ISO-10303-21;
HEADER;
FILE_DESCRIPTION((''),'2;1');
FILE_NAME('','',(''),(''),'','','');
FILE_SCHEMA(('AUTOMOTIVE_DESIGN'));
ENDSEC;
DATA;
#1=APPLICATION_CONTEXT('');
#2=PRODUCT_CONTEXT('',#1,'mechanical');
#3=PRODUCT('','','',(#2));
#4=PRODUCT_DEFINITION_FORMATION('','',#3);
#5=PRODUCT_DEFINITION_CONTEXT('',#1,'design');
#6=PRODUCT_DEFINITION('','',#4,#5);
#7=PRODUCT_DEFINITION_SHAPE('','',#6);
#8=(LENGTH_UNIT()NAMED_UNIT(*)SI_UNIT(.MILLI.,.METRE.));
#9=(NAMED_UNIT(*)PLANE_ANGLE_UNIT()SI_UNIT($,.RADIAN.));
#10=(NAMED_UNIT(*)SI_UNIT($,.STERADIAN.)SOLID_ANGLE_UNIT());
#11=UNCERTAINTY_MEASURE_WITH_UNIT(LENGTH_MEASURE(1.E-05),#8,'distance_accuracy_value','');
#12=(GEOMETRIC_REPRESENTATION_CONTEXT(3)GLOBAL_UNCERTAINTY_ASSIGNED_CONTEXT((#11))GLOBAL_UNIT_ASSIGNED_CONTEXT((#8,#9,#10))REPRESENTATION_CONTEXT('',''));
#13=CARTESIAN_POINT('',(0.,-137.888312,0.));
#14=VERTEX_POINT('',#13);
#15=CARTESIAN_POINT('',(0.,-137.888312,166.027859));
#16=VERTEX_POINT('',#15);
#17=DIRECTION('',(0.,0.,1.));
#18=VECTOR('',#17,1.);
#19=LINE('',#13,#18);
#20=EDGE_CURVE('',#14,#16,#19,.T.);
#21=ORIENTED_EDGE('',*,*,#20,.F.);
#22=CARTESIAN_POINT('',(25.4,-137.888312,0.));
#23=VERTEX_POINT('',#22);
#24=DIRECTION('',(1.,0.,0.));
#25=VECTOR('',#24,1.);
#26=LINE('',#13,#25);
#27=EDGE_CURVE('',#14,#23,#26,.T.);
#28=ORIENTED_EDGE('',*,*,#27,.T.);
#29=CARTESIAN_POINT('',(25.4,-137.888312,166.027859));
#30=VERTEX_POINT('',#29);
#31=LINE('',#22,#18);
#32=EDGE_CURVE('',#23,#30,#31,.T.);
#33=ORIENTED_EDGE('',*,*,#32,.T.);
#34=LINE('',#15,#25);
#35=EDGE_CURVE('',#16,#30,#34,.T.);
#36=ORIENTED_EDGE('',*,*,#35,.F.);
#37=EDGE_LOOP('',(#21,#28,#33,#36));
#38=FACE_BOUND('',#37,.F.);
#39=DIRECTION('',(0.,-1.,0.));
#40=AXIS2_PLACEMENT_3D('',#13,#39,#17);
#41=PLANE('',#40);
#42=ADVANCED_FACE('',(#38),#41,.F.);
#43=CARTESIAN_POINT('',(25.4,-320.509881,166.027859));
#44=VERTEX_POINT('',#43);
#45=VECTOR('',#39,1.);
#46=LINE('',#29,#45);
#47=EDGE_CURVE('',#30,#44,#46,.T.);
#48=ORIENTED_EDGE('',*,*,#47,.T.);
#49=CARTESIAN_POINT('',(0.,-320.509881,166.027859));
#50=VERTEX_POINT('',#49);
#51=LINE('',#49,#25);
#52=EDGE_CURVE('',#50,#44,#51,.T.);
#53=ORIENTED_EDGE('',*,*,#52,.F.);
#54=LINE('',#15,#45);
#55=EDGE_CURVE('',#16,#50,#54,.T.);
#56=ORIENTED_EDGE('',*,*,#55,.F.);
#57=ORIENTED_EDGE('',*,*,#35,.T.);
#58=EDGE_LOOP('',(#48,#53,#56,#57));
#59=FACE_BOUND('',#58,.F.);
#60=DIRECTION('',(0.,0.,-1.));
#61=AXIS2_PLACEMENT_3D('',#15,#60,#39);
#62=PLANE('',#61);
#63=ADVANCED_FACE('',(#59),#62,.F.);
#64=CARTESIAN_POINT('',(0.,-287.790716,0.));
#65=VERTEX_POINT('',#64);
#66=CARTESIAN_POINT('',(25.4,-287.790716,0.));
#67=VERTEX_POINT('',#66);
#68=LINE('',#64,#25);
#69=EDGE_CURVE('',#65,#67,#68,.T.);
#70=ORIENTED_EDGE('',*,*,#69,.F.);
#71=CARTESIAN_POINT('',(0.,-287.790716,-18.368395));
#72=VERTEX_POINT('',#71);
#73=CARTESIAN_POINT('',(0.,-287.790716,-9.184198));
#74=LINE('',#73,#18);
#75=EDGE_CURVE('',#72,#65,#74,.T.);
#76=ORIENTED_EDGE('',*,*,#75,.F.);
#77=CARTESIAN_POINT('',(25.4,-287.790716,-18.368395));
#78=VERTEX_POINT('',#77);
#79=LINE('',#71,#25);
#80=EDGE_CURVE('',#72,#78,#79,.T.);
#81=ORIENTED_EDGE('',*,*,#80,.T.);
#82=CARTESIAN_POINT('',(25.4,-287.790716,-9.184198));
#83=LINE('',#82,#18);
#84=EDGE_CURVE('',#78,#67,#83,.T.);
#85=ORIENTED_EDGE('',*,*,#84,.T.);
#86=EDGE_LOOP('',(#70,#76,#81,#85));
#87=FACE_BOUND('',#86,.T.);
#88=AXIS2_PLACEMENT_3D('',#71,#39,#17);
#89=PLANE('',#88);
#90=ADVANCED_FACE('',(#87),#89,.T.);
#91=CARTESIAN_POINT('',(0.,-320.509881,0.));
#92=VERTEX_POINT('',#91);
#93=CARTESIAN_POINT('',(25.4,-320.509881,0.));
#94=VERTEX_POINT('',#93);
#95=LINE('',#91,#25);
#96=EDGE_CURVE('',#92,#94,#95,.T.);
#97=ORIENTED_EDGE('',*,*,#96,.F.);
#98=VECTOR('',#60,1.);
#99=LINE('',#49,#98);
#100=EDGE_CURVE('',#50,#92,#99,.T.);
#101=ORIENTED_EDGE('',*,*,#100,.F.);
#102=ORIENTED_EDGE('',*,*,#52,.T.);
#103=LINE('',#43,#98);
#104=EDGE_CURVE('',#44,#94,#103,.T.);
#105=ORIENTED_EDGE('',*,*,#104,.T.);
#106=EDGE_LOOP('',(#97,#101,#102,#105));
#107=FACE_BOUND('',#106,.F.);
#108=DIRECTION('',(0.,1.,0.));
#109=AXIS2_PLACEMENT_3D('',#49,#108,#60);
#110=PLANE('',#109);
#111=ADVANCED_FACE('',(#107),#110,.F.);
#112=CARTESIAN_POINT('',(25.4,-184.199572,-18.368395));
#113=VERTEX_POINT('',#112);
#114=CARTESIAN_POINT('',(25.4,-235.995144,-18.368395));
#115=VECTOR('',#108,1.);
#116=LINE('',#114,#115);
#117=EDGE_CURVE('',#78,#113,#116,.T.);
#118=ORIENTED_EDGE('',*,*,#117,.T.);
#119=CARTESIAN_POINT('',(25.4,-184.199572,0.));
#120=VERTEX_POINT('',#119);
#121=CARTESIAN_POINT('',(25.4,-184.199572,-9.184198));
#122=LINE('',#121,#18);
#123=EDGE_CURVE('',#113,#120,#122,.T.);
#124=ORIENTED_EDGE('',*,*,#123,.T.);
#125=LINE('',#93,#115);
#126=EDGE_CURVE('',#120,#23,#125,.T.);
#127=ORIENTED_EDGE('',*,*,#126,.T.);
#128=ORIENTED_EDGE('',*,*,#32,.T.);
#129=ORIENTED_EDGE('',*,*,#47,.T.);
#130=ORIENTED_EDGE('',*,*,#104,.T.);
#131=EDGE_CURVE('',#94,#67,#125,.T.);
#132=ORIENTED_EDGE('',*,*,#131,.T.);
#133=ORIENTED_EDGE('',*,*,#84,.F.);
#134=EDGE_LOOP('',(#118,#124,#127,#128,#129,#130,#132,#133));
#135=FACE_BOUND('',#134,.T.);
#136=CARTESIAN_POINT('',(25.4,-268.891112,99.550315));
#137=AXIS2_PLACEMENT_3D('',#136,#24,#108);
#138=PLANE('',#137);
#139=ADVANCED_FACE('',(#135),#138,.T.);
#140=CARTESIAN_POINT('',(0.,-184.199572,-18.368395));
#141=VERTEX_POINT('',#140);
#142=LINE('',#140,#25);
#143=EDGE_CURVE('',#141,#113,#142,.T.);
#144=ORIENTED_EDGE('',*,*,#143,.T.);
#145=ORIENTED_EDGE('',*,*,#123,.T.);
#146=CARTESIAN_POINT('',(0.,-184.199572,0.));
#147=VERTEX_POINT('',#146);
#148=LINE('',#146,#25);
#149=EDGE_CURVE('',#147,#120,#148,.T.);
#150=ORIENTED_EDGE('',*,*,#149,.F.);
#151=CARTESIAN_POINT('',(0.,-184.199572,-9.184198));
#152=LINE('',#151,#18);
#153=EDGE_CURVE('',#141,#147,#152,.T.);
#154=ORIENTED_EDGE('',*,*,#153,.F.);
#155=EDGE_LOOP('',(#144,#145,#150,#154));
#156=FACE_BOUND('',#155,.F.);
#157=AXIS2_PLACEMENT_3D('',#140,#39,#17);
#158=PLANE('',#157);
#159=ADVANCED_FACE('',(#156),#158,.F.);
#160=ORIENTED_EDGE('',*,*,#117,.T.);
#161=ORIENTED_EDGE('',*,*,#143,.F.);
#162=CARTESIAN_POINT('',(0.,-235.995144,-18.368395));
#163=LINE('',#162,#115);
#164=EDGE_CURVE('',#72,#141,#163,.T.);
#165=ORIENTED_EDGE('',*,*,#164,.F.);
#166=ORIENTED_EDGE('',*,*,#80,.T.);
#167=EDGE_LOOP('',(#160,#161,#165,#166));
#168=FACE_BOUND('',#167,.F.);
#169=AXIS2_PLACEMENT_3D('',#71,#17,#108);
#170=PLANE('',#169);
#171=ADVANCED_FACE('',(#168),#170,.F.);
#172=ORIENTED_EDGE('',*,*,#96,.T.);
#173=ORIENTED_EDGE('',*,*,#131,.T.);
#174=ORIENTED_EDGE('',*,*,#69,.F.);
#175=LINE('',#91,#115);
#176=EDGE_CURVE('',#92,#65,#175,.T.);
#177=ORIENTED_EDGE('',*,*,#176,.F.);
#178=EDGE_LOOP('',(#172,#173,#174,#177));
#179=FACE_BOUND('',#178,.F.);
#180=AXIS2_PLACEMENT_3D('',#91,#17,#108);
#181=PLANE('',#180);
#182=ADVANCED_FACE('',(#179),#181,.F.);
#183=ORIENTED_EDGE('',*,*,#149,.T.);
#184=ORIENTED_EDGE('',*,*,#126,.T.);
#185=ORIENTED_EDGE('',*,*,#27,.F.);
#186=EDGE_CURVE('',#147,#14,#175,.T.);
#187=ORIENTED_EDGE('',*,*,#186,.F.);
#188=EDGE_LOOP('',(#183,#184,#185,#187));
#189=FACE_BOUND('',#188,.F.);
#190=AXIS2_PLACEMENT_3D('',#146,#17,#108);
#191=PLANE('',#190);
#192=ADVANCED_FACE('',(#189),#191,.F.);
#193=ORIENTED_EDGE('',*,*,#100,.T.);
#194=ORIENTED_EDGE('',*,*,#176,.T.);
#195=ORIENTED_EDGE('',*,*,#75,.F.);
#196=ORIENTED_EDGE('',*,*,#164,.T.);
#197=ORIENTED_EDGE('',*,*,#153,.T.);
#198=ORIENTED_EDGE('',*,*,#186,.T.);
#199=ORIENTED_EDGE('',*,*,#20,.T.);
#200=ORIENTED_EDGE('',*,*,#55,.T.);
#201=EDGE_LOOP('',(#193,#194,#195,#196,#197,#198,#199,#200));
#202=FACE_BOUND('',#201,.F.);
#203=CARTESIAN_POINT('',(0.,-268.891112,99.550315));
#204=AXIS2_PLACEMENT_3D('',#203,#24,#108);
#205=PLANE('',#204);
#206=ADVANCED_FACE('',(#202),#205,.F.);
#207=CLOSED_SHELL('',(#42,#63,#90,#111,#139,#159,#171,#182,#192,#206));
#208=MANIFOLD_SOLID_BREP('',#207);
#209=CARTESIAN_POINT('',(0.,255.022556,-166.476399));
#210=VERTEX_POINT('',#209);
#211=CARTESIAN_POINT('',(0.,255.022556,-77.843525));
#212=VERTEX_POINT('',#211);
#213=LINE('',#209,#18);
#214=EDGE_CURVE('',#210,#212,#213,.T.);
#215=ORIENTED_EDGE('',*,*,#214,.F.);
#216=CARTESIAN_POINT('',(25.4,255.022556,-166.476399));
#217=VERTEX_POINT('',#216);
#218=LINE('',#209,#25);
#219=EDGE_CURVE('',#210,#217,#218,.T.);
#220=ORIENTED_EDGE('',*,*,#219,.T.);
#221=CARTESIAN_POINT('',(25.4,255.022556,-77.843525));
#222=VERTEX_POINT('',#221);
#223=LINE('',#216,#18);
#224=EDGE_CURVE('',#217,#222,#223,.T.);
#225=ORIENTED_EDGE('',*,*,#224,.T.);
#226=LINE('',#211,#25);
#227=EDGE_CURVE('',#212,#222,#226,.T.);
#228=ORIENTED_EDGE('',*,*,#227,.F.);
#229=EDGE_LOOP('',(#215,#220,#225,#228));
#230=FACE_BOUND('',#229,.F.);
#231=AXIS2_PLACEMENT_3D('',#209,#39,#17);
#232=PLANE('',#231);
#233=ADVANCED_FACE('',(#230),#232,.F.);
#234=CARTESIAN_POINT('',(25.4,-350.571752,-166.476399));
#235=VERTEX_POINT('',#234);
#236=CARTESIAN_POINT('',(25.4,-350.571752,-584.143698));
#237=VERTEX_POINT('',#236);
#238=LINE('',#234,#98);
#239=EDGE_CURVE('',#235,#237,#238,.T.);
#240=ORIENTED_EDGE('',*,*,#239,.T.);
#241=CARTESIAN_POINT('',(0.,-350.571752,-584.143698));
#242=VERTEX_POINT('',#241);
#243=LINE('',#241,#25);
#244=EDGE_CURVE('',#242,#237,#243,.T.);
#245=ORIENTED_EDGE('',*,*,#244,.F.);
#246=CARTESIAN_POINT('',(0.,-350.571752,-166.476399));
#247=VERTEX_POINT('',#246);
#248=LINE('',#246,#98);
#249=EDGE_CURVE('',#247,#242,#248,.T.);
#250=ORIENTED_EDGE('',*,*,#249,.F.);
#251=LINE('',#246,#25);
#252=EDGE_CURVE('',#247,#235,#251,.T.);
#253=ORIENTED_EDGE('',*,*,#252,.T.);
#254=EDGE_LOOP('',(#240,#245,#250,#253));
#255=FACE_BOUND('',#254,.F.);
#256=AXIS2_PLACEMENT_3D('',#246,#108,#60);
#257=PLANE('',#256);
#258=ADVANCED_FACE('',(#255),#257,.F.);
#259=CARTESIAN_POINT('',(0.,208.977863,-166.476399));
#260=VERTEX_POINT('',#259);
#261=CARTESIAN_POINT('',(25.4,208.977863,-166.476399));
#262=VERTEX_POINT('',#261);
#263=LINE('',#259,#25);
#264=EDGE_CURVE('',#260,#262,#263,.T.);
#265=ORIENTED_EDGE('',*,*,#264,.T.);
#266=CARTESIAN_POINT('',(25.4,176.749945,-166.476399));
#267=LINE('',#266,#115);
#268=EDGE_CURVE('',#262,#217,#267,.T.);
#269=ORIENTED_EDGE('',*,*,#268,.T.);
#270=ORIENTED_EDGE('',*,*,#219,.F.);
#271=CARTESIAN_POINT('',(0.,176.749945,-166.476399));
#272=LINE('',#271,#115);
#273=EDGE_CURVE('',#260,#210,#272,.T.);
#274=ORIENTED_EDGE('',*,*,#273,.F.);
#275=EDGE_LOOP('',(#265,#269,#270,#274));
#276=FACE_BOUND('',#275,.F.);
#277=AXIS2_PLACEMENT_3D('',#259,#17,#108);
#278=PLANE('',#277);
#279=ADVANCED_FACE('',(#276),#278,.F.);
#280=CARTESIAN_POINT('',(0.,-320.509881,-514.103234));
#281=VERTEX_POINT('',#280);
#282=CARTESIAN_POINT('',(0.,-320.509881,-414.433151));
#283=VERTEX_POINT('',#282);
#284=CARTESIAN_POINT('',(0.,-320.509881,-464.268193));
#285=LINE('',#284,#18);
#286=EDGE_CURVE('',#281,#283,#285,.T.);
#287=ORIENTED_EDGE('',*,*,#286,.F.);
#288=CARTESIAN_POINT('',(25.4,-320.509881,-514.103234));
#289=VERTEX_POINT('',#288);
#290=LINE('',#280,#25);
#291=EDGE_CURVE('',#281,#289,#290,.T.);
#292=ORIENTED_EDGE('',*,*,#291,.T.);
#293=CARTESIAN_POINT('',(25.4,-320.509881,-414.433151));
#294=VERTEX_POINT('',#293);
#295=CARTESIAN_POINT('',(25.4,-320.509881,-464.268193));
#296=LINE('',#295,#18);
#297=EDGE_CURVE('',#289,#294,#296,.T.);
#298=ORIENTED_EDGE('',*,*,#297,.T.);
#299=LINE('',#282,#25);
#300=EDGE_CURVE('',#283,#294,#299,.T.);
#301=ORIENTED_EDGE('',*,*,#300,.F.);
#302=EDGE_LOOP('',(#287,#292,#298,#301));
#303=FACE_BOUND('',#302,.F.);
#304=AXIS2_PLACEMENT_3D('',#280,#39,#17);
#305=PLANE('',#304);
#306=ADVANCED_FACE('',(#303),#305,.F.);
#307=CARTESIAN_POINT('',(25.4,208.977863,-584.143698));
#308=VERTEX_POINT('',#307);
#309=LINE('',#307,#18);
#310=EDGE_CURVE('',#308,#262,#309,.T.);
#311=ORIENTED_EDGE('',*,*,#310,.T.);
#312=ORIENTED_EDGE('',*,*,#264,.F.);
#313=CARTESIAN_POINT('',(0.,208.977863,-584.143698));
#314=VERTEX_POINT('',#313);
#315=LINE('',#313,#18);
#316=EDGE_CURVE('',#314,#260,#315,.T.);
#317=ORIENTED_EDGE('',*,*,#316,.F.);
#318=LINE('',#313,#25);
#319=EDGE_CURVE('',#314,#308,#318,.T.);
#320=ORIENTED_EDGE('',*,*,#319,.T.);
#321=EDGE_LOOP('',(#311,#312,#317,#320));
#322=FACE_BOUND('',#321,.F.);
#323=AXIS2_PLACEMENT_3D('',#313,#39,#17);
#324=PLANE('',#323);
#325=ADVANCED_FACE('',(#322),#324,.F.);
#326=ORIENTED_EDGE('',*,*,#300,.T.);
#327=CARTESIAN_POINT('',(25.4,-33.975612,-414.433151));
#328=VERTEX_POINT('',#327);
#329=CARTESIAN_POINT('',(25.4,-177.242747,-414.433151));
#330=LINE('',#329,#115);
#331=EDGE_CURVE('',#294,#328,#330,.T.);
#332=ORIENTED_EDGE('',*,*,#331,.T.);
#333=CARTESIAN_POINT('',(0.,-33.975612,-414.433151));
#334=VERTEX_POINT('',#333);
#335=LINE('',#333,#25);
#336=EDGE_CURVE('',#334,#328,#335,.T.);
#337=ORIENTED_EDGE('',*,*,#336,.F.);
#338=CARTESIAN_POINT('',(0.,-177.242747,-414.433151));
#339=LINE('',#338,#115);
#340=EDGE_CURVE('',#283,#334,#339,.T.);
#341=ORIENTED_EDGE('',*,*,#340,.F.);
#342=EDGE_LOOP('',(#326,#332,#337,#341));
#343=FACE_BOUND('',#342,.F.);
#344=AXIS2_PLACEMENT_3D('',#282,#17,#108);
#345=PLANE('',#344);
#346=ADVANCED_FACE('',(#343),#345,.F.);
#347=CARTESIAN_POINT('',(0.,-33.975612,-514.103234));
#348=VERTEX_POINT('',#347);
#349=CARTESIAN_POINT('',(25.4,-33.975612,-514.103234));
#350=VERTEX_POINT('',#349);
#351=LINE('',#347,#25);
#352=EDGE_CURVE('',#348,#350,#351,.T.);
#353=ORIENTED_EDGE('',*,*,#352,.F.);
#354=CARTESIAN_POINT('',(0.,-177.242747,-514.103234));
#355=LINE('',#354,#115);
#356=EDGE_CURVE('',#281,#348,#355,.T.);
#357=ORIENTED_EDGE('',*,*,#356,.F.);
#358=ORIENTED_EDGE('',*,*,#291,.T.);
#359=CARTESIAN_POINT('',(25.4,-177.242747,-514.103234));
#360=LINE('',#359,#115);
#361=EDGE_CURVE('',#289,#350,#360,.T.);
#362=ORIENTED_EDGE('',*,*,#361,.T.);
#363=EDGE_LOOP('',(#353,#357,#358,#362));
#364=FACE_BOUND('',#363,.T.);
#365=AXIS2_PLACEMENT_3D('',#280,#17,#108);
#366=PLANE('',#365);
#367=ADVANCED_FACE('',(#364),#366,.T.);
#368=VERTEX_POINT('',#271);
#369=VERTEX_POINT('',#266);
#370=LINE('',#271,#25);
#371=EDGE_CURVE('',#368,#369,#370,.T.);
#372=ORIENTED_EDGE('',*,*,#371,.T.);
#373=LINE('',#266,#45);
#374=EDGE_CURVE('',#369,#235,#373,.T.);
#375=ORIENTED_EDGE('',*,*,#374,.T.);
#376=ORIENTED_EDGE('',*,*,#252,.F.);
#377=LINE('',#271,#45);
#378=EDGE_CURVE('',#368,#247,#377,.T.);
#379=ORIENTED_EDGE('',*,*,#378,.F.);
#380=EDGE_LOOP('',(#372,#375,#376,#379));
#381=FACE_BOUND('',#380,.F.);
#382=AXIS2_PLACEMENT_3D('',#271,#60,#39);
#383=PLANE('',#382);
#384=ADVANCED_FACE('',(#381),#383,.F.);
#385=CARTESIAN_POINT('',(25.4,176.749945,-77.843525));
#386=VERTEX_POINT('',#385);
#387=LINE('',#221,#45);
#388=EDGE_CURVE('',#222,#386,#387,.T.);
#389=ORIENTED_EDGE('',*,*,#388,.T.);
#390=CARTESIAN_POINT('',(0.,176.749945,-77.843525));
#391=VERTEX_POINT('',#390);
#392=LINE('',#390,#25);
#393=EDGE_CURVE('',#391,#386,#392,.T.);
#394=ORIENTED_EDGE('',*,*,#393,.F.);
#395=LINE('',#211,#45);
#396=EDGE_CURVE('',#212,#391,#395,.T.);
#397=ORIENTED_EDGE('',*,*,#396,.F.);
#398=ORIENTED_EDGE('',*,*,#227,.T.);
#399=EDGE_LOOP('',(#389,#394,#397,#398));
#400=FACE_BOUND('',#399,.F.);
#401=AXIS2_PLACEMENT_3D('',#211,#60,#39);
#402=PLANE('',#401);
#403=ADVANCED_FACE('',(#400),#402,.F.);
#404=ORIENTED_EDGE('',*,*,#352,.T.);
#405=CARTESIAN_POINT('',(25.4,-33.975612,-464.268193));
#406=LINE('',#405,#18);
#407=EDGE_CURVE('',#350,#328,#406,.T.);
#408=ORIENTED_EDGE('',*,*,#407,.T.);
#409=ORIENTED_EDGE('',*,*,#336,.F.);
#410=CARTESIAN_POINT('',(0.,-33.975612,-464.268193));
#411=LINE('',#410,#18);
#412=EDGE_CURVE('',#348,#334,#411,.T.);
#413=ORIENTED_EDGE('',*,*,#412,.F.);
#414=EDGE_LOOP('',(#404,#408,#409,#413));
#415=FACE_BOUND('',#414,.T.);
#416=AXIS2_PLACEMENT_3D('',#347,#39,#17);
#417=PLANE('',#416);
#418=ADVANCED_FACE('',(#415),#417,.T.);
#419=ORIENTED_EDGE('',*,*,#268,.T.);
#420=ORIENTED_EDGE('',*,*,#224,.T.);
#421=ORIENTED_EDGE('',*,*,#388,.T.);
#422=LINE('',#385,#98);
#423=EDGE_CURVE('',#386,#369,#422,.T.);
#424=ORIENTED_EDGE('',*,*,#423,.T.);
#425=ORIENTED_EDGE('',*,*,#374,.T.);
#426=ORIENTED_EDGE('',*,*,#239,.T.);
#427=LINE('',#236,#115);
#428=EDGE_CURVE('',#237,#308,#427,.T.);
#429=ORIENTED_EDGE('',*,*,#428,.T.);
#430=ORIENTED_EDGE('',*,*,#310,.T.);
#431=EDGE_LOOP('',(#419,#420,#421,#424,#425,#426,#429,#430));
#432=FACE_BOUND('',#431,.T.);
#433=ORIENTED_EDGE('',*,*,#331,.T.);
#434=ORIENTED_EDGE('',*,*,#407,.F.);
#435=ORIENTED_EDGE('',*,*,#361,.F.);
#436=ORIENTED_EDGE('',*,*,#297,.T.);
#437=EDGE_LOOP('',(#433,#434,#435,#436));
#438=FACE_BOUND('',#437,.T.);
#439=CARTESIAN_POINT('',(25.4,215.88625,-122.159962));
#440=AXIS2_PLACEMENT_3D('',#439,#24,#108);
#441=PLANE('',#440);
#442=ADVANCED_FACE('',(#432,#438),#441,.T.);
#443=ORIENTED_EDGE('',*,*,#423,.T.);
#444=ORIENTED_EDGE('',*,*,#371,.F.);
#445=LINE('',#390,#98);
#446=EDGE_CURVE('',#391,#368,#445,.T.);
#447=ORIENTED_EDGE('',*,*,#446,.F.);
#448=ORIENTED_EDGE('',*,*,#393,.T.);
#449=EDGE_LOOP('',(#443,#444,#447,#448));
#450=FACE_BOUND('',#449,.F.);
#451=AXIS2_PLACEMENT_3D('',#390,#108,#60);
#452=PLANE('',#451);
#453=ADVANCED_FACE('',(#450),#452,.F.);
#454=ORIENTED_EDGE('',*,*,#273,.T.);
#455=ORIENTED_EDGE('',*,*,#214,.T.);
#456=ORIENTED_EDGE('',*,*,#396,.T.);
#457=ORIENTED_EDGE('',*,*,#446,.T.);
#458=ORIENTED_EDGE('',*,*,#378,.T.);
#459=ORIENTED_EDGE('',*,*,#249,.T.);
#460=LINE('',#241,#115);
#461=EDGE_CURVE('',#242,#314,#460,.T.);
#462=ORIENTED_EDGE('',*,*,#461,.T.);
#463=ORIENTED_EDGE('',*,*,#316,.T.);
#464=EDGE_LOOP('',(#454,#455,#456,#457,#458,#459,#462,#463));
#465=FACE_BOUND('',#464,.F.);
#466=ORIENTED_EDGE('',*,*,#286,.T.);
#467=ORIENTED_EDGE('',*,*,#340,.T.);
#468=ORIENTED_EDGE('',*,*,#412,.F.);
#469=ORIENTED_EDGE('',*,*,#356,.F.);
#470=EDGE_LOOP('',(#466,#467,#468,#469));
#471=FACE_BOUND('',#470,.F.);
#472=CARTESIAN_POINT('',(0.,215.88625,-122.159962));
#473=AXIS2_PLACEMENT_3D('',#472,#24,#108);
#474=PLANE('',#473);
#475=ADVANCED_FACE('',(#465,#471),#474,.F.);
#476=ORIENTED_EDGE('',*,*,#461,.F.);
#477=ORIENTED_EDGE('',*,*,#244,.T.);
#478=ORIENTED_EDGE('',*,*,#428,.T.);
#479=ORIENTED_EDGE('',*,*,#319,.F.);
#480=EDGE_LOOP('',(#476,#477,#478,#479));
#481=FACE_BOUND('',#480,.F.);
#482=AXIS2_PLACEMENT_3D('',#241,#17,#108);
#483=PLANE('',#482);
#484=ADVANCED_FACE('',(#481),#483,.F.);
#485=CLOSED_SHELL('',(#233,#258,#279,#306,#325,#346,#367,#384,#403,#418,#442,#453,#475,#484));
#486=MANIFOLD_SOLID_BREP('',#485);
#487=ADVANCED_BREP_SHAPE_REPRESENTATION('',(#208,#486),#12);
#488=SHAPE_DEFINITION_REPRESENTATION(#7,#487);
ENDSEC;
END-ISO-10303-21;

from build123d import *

# Parameters (mm, degrees)
F0_W     = 103.5911440849
F0_H     = 96.5252518654
F0_H_2   = 18.3683950454
F1_DEPTH = 25.4
F0_W_2   = 286.534268409
F0_H_3   = 99.6700823307


with BuildPart() as f1:
    # F0 (on Right) → F1 (new body)
    with BuildSketch(Plane.YZ):
        Polygon((-287.7907156944, 0), (-287.7907156944, 96.5252518654), (-184.1995716095, 96.5252518654), (-184.1995716095, 166.0278588533), (-320.5098807812, 166.0278588533), (-320.5098807812, 0), align=None)
        with Locations((-235.995143652, 48.2626259327)):
            Rectangle(F0_W, F0_H)
        Polygon((-184.1995716095, 166.0278588533), (-184.1995716095, 96.5252518654), (-184.1995716095, 0), (-137.8883123398, 0), (-137.8883123398, 166.0278588533), align=None)
        with Locations((-235.995143652, -9.1841975227)):
            Rectangle(F0_W, F0_H_2)
    extrude(amount=F1_DEPTH)


with BuildPart() as f1b:
    # F0 (on Right) → F1, piece 2 (new body)
    with BuildSketch(Plane.YZ):
        Polygon((255.0225555897, -166.4763987064), (255.0225555897, -77.8435245156), (176.7499446869, -77.8435245156), (176.7499446869, -166.4763987064), (208.9778631926, -166.4763987064), align=None)
        Polygon((208.9778631926, -166.4763987064), (176.7499446869, -166.4763987064), (-350.5717515945, -166.4763987064), (-350.5717515945, -584.1436982155), (208.9778631926, -584.1436982155), align=None)
        with Locations((-177.2427465767, -464.2681926489)):
            Rectangle(F0_W_2, F0_H_3, mode=Mode.SUBTRACT)
    extrude(amount=F1_DEPTH)


solid = Compound([f1.part, f1b.part])
